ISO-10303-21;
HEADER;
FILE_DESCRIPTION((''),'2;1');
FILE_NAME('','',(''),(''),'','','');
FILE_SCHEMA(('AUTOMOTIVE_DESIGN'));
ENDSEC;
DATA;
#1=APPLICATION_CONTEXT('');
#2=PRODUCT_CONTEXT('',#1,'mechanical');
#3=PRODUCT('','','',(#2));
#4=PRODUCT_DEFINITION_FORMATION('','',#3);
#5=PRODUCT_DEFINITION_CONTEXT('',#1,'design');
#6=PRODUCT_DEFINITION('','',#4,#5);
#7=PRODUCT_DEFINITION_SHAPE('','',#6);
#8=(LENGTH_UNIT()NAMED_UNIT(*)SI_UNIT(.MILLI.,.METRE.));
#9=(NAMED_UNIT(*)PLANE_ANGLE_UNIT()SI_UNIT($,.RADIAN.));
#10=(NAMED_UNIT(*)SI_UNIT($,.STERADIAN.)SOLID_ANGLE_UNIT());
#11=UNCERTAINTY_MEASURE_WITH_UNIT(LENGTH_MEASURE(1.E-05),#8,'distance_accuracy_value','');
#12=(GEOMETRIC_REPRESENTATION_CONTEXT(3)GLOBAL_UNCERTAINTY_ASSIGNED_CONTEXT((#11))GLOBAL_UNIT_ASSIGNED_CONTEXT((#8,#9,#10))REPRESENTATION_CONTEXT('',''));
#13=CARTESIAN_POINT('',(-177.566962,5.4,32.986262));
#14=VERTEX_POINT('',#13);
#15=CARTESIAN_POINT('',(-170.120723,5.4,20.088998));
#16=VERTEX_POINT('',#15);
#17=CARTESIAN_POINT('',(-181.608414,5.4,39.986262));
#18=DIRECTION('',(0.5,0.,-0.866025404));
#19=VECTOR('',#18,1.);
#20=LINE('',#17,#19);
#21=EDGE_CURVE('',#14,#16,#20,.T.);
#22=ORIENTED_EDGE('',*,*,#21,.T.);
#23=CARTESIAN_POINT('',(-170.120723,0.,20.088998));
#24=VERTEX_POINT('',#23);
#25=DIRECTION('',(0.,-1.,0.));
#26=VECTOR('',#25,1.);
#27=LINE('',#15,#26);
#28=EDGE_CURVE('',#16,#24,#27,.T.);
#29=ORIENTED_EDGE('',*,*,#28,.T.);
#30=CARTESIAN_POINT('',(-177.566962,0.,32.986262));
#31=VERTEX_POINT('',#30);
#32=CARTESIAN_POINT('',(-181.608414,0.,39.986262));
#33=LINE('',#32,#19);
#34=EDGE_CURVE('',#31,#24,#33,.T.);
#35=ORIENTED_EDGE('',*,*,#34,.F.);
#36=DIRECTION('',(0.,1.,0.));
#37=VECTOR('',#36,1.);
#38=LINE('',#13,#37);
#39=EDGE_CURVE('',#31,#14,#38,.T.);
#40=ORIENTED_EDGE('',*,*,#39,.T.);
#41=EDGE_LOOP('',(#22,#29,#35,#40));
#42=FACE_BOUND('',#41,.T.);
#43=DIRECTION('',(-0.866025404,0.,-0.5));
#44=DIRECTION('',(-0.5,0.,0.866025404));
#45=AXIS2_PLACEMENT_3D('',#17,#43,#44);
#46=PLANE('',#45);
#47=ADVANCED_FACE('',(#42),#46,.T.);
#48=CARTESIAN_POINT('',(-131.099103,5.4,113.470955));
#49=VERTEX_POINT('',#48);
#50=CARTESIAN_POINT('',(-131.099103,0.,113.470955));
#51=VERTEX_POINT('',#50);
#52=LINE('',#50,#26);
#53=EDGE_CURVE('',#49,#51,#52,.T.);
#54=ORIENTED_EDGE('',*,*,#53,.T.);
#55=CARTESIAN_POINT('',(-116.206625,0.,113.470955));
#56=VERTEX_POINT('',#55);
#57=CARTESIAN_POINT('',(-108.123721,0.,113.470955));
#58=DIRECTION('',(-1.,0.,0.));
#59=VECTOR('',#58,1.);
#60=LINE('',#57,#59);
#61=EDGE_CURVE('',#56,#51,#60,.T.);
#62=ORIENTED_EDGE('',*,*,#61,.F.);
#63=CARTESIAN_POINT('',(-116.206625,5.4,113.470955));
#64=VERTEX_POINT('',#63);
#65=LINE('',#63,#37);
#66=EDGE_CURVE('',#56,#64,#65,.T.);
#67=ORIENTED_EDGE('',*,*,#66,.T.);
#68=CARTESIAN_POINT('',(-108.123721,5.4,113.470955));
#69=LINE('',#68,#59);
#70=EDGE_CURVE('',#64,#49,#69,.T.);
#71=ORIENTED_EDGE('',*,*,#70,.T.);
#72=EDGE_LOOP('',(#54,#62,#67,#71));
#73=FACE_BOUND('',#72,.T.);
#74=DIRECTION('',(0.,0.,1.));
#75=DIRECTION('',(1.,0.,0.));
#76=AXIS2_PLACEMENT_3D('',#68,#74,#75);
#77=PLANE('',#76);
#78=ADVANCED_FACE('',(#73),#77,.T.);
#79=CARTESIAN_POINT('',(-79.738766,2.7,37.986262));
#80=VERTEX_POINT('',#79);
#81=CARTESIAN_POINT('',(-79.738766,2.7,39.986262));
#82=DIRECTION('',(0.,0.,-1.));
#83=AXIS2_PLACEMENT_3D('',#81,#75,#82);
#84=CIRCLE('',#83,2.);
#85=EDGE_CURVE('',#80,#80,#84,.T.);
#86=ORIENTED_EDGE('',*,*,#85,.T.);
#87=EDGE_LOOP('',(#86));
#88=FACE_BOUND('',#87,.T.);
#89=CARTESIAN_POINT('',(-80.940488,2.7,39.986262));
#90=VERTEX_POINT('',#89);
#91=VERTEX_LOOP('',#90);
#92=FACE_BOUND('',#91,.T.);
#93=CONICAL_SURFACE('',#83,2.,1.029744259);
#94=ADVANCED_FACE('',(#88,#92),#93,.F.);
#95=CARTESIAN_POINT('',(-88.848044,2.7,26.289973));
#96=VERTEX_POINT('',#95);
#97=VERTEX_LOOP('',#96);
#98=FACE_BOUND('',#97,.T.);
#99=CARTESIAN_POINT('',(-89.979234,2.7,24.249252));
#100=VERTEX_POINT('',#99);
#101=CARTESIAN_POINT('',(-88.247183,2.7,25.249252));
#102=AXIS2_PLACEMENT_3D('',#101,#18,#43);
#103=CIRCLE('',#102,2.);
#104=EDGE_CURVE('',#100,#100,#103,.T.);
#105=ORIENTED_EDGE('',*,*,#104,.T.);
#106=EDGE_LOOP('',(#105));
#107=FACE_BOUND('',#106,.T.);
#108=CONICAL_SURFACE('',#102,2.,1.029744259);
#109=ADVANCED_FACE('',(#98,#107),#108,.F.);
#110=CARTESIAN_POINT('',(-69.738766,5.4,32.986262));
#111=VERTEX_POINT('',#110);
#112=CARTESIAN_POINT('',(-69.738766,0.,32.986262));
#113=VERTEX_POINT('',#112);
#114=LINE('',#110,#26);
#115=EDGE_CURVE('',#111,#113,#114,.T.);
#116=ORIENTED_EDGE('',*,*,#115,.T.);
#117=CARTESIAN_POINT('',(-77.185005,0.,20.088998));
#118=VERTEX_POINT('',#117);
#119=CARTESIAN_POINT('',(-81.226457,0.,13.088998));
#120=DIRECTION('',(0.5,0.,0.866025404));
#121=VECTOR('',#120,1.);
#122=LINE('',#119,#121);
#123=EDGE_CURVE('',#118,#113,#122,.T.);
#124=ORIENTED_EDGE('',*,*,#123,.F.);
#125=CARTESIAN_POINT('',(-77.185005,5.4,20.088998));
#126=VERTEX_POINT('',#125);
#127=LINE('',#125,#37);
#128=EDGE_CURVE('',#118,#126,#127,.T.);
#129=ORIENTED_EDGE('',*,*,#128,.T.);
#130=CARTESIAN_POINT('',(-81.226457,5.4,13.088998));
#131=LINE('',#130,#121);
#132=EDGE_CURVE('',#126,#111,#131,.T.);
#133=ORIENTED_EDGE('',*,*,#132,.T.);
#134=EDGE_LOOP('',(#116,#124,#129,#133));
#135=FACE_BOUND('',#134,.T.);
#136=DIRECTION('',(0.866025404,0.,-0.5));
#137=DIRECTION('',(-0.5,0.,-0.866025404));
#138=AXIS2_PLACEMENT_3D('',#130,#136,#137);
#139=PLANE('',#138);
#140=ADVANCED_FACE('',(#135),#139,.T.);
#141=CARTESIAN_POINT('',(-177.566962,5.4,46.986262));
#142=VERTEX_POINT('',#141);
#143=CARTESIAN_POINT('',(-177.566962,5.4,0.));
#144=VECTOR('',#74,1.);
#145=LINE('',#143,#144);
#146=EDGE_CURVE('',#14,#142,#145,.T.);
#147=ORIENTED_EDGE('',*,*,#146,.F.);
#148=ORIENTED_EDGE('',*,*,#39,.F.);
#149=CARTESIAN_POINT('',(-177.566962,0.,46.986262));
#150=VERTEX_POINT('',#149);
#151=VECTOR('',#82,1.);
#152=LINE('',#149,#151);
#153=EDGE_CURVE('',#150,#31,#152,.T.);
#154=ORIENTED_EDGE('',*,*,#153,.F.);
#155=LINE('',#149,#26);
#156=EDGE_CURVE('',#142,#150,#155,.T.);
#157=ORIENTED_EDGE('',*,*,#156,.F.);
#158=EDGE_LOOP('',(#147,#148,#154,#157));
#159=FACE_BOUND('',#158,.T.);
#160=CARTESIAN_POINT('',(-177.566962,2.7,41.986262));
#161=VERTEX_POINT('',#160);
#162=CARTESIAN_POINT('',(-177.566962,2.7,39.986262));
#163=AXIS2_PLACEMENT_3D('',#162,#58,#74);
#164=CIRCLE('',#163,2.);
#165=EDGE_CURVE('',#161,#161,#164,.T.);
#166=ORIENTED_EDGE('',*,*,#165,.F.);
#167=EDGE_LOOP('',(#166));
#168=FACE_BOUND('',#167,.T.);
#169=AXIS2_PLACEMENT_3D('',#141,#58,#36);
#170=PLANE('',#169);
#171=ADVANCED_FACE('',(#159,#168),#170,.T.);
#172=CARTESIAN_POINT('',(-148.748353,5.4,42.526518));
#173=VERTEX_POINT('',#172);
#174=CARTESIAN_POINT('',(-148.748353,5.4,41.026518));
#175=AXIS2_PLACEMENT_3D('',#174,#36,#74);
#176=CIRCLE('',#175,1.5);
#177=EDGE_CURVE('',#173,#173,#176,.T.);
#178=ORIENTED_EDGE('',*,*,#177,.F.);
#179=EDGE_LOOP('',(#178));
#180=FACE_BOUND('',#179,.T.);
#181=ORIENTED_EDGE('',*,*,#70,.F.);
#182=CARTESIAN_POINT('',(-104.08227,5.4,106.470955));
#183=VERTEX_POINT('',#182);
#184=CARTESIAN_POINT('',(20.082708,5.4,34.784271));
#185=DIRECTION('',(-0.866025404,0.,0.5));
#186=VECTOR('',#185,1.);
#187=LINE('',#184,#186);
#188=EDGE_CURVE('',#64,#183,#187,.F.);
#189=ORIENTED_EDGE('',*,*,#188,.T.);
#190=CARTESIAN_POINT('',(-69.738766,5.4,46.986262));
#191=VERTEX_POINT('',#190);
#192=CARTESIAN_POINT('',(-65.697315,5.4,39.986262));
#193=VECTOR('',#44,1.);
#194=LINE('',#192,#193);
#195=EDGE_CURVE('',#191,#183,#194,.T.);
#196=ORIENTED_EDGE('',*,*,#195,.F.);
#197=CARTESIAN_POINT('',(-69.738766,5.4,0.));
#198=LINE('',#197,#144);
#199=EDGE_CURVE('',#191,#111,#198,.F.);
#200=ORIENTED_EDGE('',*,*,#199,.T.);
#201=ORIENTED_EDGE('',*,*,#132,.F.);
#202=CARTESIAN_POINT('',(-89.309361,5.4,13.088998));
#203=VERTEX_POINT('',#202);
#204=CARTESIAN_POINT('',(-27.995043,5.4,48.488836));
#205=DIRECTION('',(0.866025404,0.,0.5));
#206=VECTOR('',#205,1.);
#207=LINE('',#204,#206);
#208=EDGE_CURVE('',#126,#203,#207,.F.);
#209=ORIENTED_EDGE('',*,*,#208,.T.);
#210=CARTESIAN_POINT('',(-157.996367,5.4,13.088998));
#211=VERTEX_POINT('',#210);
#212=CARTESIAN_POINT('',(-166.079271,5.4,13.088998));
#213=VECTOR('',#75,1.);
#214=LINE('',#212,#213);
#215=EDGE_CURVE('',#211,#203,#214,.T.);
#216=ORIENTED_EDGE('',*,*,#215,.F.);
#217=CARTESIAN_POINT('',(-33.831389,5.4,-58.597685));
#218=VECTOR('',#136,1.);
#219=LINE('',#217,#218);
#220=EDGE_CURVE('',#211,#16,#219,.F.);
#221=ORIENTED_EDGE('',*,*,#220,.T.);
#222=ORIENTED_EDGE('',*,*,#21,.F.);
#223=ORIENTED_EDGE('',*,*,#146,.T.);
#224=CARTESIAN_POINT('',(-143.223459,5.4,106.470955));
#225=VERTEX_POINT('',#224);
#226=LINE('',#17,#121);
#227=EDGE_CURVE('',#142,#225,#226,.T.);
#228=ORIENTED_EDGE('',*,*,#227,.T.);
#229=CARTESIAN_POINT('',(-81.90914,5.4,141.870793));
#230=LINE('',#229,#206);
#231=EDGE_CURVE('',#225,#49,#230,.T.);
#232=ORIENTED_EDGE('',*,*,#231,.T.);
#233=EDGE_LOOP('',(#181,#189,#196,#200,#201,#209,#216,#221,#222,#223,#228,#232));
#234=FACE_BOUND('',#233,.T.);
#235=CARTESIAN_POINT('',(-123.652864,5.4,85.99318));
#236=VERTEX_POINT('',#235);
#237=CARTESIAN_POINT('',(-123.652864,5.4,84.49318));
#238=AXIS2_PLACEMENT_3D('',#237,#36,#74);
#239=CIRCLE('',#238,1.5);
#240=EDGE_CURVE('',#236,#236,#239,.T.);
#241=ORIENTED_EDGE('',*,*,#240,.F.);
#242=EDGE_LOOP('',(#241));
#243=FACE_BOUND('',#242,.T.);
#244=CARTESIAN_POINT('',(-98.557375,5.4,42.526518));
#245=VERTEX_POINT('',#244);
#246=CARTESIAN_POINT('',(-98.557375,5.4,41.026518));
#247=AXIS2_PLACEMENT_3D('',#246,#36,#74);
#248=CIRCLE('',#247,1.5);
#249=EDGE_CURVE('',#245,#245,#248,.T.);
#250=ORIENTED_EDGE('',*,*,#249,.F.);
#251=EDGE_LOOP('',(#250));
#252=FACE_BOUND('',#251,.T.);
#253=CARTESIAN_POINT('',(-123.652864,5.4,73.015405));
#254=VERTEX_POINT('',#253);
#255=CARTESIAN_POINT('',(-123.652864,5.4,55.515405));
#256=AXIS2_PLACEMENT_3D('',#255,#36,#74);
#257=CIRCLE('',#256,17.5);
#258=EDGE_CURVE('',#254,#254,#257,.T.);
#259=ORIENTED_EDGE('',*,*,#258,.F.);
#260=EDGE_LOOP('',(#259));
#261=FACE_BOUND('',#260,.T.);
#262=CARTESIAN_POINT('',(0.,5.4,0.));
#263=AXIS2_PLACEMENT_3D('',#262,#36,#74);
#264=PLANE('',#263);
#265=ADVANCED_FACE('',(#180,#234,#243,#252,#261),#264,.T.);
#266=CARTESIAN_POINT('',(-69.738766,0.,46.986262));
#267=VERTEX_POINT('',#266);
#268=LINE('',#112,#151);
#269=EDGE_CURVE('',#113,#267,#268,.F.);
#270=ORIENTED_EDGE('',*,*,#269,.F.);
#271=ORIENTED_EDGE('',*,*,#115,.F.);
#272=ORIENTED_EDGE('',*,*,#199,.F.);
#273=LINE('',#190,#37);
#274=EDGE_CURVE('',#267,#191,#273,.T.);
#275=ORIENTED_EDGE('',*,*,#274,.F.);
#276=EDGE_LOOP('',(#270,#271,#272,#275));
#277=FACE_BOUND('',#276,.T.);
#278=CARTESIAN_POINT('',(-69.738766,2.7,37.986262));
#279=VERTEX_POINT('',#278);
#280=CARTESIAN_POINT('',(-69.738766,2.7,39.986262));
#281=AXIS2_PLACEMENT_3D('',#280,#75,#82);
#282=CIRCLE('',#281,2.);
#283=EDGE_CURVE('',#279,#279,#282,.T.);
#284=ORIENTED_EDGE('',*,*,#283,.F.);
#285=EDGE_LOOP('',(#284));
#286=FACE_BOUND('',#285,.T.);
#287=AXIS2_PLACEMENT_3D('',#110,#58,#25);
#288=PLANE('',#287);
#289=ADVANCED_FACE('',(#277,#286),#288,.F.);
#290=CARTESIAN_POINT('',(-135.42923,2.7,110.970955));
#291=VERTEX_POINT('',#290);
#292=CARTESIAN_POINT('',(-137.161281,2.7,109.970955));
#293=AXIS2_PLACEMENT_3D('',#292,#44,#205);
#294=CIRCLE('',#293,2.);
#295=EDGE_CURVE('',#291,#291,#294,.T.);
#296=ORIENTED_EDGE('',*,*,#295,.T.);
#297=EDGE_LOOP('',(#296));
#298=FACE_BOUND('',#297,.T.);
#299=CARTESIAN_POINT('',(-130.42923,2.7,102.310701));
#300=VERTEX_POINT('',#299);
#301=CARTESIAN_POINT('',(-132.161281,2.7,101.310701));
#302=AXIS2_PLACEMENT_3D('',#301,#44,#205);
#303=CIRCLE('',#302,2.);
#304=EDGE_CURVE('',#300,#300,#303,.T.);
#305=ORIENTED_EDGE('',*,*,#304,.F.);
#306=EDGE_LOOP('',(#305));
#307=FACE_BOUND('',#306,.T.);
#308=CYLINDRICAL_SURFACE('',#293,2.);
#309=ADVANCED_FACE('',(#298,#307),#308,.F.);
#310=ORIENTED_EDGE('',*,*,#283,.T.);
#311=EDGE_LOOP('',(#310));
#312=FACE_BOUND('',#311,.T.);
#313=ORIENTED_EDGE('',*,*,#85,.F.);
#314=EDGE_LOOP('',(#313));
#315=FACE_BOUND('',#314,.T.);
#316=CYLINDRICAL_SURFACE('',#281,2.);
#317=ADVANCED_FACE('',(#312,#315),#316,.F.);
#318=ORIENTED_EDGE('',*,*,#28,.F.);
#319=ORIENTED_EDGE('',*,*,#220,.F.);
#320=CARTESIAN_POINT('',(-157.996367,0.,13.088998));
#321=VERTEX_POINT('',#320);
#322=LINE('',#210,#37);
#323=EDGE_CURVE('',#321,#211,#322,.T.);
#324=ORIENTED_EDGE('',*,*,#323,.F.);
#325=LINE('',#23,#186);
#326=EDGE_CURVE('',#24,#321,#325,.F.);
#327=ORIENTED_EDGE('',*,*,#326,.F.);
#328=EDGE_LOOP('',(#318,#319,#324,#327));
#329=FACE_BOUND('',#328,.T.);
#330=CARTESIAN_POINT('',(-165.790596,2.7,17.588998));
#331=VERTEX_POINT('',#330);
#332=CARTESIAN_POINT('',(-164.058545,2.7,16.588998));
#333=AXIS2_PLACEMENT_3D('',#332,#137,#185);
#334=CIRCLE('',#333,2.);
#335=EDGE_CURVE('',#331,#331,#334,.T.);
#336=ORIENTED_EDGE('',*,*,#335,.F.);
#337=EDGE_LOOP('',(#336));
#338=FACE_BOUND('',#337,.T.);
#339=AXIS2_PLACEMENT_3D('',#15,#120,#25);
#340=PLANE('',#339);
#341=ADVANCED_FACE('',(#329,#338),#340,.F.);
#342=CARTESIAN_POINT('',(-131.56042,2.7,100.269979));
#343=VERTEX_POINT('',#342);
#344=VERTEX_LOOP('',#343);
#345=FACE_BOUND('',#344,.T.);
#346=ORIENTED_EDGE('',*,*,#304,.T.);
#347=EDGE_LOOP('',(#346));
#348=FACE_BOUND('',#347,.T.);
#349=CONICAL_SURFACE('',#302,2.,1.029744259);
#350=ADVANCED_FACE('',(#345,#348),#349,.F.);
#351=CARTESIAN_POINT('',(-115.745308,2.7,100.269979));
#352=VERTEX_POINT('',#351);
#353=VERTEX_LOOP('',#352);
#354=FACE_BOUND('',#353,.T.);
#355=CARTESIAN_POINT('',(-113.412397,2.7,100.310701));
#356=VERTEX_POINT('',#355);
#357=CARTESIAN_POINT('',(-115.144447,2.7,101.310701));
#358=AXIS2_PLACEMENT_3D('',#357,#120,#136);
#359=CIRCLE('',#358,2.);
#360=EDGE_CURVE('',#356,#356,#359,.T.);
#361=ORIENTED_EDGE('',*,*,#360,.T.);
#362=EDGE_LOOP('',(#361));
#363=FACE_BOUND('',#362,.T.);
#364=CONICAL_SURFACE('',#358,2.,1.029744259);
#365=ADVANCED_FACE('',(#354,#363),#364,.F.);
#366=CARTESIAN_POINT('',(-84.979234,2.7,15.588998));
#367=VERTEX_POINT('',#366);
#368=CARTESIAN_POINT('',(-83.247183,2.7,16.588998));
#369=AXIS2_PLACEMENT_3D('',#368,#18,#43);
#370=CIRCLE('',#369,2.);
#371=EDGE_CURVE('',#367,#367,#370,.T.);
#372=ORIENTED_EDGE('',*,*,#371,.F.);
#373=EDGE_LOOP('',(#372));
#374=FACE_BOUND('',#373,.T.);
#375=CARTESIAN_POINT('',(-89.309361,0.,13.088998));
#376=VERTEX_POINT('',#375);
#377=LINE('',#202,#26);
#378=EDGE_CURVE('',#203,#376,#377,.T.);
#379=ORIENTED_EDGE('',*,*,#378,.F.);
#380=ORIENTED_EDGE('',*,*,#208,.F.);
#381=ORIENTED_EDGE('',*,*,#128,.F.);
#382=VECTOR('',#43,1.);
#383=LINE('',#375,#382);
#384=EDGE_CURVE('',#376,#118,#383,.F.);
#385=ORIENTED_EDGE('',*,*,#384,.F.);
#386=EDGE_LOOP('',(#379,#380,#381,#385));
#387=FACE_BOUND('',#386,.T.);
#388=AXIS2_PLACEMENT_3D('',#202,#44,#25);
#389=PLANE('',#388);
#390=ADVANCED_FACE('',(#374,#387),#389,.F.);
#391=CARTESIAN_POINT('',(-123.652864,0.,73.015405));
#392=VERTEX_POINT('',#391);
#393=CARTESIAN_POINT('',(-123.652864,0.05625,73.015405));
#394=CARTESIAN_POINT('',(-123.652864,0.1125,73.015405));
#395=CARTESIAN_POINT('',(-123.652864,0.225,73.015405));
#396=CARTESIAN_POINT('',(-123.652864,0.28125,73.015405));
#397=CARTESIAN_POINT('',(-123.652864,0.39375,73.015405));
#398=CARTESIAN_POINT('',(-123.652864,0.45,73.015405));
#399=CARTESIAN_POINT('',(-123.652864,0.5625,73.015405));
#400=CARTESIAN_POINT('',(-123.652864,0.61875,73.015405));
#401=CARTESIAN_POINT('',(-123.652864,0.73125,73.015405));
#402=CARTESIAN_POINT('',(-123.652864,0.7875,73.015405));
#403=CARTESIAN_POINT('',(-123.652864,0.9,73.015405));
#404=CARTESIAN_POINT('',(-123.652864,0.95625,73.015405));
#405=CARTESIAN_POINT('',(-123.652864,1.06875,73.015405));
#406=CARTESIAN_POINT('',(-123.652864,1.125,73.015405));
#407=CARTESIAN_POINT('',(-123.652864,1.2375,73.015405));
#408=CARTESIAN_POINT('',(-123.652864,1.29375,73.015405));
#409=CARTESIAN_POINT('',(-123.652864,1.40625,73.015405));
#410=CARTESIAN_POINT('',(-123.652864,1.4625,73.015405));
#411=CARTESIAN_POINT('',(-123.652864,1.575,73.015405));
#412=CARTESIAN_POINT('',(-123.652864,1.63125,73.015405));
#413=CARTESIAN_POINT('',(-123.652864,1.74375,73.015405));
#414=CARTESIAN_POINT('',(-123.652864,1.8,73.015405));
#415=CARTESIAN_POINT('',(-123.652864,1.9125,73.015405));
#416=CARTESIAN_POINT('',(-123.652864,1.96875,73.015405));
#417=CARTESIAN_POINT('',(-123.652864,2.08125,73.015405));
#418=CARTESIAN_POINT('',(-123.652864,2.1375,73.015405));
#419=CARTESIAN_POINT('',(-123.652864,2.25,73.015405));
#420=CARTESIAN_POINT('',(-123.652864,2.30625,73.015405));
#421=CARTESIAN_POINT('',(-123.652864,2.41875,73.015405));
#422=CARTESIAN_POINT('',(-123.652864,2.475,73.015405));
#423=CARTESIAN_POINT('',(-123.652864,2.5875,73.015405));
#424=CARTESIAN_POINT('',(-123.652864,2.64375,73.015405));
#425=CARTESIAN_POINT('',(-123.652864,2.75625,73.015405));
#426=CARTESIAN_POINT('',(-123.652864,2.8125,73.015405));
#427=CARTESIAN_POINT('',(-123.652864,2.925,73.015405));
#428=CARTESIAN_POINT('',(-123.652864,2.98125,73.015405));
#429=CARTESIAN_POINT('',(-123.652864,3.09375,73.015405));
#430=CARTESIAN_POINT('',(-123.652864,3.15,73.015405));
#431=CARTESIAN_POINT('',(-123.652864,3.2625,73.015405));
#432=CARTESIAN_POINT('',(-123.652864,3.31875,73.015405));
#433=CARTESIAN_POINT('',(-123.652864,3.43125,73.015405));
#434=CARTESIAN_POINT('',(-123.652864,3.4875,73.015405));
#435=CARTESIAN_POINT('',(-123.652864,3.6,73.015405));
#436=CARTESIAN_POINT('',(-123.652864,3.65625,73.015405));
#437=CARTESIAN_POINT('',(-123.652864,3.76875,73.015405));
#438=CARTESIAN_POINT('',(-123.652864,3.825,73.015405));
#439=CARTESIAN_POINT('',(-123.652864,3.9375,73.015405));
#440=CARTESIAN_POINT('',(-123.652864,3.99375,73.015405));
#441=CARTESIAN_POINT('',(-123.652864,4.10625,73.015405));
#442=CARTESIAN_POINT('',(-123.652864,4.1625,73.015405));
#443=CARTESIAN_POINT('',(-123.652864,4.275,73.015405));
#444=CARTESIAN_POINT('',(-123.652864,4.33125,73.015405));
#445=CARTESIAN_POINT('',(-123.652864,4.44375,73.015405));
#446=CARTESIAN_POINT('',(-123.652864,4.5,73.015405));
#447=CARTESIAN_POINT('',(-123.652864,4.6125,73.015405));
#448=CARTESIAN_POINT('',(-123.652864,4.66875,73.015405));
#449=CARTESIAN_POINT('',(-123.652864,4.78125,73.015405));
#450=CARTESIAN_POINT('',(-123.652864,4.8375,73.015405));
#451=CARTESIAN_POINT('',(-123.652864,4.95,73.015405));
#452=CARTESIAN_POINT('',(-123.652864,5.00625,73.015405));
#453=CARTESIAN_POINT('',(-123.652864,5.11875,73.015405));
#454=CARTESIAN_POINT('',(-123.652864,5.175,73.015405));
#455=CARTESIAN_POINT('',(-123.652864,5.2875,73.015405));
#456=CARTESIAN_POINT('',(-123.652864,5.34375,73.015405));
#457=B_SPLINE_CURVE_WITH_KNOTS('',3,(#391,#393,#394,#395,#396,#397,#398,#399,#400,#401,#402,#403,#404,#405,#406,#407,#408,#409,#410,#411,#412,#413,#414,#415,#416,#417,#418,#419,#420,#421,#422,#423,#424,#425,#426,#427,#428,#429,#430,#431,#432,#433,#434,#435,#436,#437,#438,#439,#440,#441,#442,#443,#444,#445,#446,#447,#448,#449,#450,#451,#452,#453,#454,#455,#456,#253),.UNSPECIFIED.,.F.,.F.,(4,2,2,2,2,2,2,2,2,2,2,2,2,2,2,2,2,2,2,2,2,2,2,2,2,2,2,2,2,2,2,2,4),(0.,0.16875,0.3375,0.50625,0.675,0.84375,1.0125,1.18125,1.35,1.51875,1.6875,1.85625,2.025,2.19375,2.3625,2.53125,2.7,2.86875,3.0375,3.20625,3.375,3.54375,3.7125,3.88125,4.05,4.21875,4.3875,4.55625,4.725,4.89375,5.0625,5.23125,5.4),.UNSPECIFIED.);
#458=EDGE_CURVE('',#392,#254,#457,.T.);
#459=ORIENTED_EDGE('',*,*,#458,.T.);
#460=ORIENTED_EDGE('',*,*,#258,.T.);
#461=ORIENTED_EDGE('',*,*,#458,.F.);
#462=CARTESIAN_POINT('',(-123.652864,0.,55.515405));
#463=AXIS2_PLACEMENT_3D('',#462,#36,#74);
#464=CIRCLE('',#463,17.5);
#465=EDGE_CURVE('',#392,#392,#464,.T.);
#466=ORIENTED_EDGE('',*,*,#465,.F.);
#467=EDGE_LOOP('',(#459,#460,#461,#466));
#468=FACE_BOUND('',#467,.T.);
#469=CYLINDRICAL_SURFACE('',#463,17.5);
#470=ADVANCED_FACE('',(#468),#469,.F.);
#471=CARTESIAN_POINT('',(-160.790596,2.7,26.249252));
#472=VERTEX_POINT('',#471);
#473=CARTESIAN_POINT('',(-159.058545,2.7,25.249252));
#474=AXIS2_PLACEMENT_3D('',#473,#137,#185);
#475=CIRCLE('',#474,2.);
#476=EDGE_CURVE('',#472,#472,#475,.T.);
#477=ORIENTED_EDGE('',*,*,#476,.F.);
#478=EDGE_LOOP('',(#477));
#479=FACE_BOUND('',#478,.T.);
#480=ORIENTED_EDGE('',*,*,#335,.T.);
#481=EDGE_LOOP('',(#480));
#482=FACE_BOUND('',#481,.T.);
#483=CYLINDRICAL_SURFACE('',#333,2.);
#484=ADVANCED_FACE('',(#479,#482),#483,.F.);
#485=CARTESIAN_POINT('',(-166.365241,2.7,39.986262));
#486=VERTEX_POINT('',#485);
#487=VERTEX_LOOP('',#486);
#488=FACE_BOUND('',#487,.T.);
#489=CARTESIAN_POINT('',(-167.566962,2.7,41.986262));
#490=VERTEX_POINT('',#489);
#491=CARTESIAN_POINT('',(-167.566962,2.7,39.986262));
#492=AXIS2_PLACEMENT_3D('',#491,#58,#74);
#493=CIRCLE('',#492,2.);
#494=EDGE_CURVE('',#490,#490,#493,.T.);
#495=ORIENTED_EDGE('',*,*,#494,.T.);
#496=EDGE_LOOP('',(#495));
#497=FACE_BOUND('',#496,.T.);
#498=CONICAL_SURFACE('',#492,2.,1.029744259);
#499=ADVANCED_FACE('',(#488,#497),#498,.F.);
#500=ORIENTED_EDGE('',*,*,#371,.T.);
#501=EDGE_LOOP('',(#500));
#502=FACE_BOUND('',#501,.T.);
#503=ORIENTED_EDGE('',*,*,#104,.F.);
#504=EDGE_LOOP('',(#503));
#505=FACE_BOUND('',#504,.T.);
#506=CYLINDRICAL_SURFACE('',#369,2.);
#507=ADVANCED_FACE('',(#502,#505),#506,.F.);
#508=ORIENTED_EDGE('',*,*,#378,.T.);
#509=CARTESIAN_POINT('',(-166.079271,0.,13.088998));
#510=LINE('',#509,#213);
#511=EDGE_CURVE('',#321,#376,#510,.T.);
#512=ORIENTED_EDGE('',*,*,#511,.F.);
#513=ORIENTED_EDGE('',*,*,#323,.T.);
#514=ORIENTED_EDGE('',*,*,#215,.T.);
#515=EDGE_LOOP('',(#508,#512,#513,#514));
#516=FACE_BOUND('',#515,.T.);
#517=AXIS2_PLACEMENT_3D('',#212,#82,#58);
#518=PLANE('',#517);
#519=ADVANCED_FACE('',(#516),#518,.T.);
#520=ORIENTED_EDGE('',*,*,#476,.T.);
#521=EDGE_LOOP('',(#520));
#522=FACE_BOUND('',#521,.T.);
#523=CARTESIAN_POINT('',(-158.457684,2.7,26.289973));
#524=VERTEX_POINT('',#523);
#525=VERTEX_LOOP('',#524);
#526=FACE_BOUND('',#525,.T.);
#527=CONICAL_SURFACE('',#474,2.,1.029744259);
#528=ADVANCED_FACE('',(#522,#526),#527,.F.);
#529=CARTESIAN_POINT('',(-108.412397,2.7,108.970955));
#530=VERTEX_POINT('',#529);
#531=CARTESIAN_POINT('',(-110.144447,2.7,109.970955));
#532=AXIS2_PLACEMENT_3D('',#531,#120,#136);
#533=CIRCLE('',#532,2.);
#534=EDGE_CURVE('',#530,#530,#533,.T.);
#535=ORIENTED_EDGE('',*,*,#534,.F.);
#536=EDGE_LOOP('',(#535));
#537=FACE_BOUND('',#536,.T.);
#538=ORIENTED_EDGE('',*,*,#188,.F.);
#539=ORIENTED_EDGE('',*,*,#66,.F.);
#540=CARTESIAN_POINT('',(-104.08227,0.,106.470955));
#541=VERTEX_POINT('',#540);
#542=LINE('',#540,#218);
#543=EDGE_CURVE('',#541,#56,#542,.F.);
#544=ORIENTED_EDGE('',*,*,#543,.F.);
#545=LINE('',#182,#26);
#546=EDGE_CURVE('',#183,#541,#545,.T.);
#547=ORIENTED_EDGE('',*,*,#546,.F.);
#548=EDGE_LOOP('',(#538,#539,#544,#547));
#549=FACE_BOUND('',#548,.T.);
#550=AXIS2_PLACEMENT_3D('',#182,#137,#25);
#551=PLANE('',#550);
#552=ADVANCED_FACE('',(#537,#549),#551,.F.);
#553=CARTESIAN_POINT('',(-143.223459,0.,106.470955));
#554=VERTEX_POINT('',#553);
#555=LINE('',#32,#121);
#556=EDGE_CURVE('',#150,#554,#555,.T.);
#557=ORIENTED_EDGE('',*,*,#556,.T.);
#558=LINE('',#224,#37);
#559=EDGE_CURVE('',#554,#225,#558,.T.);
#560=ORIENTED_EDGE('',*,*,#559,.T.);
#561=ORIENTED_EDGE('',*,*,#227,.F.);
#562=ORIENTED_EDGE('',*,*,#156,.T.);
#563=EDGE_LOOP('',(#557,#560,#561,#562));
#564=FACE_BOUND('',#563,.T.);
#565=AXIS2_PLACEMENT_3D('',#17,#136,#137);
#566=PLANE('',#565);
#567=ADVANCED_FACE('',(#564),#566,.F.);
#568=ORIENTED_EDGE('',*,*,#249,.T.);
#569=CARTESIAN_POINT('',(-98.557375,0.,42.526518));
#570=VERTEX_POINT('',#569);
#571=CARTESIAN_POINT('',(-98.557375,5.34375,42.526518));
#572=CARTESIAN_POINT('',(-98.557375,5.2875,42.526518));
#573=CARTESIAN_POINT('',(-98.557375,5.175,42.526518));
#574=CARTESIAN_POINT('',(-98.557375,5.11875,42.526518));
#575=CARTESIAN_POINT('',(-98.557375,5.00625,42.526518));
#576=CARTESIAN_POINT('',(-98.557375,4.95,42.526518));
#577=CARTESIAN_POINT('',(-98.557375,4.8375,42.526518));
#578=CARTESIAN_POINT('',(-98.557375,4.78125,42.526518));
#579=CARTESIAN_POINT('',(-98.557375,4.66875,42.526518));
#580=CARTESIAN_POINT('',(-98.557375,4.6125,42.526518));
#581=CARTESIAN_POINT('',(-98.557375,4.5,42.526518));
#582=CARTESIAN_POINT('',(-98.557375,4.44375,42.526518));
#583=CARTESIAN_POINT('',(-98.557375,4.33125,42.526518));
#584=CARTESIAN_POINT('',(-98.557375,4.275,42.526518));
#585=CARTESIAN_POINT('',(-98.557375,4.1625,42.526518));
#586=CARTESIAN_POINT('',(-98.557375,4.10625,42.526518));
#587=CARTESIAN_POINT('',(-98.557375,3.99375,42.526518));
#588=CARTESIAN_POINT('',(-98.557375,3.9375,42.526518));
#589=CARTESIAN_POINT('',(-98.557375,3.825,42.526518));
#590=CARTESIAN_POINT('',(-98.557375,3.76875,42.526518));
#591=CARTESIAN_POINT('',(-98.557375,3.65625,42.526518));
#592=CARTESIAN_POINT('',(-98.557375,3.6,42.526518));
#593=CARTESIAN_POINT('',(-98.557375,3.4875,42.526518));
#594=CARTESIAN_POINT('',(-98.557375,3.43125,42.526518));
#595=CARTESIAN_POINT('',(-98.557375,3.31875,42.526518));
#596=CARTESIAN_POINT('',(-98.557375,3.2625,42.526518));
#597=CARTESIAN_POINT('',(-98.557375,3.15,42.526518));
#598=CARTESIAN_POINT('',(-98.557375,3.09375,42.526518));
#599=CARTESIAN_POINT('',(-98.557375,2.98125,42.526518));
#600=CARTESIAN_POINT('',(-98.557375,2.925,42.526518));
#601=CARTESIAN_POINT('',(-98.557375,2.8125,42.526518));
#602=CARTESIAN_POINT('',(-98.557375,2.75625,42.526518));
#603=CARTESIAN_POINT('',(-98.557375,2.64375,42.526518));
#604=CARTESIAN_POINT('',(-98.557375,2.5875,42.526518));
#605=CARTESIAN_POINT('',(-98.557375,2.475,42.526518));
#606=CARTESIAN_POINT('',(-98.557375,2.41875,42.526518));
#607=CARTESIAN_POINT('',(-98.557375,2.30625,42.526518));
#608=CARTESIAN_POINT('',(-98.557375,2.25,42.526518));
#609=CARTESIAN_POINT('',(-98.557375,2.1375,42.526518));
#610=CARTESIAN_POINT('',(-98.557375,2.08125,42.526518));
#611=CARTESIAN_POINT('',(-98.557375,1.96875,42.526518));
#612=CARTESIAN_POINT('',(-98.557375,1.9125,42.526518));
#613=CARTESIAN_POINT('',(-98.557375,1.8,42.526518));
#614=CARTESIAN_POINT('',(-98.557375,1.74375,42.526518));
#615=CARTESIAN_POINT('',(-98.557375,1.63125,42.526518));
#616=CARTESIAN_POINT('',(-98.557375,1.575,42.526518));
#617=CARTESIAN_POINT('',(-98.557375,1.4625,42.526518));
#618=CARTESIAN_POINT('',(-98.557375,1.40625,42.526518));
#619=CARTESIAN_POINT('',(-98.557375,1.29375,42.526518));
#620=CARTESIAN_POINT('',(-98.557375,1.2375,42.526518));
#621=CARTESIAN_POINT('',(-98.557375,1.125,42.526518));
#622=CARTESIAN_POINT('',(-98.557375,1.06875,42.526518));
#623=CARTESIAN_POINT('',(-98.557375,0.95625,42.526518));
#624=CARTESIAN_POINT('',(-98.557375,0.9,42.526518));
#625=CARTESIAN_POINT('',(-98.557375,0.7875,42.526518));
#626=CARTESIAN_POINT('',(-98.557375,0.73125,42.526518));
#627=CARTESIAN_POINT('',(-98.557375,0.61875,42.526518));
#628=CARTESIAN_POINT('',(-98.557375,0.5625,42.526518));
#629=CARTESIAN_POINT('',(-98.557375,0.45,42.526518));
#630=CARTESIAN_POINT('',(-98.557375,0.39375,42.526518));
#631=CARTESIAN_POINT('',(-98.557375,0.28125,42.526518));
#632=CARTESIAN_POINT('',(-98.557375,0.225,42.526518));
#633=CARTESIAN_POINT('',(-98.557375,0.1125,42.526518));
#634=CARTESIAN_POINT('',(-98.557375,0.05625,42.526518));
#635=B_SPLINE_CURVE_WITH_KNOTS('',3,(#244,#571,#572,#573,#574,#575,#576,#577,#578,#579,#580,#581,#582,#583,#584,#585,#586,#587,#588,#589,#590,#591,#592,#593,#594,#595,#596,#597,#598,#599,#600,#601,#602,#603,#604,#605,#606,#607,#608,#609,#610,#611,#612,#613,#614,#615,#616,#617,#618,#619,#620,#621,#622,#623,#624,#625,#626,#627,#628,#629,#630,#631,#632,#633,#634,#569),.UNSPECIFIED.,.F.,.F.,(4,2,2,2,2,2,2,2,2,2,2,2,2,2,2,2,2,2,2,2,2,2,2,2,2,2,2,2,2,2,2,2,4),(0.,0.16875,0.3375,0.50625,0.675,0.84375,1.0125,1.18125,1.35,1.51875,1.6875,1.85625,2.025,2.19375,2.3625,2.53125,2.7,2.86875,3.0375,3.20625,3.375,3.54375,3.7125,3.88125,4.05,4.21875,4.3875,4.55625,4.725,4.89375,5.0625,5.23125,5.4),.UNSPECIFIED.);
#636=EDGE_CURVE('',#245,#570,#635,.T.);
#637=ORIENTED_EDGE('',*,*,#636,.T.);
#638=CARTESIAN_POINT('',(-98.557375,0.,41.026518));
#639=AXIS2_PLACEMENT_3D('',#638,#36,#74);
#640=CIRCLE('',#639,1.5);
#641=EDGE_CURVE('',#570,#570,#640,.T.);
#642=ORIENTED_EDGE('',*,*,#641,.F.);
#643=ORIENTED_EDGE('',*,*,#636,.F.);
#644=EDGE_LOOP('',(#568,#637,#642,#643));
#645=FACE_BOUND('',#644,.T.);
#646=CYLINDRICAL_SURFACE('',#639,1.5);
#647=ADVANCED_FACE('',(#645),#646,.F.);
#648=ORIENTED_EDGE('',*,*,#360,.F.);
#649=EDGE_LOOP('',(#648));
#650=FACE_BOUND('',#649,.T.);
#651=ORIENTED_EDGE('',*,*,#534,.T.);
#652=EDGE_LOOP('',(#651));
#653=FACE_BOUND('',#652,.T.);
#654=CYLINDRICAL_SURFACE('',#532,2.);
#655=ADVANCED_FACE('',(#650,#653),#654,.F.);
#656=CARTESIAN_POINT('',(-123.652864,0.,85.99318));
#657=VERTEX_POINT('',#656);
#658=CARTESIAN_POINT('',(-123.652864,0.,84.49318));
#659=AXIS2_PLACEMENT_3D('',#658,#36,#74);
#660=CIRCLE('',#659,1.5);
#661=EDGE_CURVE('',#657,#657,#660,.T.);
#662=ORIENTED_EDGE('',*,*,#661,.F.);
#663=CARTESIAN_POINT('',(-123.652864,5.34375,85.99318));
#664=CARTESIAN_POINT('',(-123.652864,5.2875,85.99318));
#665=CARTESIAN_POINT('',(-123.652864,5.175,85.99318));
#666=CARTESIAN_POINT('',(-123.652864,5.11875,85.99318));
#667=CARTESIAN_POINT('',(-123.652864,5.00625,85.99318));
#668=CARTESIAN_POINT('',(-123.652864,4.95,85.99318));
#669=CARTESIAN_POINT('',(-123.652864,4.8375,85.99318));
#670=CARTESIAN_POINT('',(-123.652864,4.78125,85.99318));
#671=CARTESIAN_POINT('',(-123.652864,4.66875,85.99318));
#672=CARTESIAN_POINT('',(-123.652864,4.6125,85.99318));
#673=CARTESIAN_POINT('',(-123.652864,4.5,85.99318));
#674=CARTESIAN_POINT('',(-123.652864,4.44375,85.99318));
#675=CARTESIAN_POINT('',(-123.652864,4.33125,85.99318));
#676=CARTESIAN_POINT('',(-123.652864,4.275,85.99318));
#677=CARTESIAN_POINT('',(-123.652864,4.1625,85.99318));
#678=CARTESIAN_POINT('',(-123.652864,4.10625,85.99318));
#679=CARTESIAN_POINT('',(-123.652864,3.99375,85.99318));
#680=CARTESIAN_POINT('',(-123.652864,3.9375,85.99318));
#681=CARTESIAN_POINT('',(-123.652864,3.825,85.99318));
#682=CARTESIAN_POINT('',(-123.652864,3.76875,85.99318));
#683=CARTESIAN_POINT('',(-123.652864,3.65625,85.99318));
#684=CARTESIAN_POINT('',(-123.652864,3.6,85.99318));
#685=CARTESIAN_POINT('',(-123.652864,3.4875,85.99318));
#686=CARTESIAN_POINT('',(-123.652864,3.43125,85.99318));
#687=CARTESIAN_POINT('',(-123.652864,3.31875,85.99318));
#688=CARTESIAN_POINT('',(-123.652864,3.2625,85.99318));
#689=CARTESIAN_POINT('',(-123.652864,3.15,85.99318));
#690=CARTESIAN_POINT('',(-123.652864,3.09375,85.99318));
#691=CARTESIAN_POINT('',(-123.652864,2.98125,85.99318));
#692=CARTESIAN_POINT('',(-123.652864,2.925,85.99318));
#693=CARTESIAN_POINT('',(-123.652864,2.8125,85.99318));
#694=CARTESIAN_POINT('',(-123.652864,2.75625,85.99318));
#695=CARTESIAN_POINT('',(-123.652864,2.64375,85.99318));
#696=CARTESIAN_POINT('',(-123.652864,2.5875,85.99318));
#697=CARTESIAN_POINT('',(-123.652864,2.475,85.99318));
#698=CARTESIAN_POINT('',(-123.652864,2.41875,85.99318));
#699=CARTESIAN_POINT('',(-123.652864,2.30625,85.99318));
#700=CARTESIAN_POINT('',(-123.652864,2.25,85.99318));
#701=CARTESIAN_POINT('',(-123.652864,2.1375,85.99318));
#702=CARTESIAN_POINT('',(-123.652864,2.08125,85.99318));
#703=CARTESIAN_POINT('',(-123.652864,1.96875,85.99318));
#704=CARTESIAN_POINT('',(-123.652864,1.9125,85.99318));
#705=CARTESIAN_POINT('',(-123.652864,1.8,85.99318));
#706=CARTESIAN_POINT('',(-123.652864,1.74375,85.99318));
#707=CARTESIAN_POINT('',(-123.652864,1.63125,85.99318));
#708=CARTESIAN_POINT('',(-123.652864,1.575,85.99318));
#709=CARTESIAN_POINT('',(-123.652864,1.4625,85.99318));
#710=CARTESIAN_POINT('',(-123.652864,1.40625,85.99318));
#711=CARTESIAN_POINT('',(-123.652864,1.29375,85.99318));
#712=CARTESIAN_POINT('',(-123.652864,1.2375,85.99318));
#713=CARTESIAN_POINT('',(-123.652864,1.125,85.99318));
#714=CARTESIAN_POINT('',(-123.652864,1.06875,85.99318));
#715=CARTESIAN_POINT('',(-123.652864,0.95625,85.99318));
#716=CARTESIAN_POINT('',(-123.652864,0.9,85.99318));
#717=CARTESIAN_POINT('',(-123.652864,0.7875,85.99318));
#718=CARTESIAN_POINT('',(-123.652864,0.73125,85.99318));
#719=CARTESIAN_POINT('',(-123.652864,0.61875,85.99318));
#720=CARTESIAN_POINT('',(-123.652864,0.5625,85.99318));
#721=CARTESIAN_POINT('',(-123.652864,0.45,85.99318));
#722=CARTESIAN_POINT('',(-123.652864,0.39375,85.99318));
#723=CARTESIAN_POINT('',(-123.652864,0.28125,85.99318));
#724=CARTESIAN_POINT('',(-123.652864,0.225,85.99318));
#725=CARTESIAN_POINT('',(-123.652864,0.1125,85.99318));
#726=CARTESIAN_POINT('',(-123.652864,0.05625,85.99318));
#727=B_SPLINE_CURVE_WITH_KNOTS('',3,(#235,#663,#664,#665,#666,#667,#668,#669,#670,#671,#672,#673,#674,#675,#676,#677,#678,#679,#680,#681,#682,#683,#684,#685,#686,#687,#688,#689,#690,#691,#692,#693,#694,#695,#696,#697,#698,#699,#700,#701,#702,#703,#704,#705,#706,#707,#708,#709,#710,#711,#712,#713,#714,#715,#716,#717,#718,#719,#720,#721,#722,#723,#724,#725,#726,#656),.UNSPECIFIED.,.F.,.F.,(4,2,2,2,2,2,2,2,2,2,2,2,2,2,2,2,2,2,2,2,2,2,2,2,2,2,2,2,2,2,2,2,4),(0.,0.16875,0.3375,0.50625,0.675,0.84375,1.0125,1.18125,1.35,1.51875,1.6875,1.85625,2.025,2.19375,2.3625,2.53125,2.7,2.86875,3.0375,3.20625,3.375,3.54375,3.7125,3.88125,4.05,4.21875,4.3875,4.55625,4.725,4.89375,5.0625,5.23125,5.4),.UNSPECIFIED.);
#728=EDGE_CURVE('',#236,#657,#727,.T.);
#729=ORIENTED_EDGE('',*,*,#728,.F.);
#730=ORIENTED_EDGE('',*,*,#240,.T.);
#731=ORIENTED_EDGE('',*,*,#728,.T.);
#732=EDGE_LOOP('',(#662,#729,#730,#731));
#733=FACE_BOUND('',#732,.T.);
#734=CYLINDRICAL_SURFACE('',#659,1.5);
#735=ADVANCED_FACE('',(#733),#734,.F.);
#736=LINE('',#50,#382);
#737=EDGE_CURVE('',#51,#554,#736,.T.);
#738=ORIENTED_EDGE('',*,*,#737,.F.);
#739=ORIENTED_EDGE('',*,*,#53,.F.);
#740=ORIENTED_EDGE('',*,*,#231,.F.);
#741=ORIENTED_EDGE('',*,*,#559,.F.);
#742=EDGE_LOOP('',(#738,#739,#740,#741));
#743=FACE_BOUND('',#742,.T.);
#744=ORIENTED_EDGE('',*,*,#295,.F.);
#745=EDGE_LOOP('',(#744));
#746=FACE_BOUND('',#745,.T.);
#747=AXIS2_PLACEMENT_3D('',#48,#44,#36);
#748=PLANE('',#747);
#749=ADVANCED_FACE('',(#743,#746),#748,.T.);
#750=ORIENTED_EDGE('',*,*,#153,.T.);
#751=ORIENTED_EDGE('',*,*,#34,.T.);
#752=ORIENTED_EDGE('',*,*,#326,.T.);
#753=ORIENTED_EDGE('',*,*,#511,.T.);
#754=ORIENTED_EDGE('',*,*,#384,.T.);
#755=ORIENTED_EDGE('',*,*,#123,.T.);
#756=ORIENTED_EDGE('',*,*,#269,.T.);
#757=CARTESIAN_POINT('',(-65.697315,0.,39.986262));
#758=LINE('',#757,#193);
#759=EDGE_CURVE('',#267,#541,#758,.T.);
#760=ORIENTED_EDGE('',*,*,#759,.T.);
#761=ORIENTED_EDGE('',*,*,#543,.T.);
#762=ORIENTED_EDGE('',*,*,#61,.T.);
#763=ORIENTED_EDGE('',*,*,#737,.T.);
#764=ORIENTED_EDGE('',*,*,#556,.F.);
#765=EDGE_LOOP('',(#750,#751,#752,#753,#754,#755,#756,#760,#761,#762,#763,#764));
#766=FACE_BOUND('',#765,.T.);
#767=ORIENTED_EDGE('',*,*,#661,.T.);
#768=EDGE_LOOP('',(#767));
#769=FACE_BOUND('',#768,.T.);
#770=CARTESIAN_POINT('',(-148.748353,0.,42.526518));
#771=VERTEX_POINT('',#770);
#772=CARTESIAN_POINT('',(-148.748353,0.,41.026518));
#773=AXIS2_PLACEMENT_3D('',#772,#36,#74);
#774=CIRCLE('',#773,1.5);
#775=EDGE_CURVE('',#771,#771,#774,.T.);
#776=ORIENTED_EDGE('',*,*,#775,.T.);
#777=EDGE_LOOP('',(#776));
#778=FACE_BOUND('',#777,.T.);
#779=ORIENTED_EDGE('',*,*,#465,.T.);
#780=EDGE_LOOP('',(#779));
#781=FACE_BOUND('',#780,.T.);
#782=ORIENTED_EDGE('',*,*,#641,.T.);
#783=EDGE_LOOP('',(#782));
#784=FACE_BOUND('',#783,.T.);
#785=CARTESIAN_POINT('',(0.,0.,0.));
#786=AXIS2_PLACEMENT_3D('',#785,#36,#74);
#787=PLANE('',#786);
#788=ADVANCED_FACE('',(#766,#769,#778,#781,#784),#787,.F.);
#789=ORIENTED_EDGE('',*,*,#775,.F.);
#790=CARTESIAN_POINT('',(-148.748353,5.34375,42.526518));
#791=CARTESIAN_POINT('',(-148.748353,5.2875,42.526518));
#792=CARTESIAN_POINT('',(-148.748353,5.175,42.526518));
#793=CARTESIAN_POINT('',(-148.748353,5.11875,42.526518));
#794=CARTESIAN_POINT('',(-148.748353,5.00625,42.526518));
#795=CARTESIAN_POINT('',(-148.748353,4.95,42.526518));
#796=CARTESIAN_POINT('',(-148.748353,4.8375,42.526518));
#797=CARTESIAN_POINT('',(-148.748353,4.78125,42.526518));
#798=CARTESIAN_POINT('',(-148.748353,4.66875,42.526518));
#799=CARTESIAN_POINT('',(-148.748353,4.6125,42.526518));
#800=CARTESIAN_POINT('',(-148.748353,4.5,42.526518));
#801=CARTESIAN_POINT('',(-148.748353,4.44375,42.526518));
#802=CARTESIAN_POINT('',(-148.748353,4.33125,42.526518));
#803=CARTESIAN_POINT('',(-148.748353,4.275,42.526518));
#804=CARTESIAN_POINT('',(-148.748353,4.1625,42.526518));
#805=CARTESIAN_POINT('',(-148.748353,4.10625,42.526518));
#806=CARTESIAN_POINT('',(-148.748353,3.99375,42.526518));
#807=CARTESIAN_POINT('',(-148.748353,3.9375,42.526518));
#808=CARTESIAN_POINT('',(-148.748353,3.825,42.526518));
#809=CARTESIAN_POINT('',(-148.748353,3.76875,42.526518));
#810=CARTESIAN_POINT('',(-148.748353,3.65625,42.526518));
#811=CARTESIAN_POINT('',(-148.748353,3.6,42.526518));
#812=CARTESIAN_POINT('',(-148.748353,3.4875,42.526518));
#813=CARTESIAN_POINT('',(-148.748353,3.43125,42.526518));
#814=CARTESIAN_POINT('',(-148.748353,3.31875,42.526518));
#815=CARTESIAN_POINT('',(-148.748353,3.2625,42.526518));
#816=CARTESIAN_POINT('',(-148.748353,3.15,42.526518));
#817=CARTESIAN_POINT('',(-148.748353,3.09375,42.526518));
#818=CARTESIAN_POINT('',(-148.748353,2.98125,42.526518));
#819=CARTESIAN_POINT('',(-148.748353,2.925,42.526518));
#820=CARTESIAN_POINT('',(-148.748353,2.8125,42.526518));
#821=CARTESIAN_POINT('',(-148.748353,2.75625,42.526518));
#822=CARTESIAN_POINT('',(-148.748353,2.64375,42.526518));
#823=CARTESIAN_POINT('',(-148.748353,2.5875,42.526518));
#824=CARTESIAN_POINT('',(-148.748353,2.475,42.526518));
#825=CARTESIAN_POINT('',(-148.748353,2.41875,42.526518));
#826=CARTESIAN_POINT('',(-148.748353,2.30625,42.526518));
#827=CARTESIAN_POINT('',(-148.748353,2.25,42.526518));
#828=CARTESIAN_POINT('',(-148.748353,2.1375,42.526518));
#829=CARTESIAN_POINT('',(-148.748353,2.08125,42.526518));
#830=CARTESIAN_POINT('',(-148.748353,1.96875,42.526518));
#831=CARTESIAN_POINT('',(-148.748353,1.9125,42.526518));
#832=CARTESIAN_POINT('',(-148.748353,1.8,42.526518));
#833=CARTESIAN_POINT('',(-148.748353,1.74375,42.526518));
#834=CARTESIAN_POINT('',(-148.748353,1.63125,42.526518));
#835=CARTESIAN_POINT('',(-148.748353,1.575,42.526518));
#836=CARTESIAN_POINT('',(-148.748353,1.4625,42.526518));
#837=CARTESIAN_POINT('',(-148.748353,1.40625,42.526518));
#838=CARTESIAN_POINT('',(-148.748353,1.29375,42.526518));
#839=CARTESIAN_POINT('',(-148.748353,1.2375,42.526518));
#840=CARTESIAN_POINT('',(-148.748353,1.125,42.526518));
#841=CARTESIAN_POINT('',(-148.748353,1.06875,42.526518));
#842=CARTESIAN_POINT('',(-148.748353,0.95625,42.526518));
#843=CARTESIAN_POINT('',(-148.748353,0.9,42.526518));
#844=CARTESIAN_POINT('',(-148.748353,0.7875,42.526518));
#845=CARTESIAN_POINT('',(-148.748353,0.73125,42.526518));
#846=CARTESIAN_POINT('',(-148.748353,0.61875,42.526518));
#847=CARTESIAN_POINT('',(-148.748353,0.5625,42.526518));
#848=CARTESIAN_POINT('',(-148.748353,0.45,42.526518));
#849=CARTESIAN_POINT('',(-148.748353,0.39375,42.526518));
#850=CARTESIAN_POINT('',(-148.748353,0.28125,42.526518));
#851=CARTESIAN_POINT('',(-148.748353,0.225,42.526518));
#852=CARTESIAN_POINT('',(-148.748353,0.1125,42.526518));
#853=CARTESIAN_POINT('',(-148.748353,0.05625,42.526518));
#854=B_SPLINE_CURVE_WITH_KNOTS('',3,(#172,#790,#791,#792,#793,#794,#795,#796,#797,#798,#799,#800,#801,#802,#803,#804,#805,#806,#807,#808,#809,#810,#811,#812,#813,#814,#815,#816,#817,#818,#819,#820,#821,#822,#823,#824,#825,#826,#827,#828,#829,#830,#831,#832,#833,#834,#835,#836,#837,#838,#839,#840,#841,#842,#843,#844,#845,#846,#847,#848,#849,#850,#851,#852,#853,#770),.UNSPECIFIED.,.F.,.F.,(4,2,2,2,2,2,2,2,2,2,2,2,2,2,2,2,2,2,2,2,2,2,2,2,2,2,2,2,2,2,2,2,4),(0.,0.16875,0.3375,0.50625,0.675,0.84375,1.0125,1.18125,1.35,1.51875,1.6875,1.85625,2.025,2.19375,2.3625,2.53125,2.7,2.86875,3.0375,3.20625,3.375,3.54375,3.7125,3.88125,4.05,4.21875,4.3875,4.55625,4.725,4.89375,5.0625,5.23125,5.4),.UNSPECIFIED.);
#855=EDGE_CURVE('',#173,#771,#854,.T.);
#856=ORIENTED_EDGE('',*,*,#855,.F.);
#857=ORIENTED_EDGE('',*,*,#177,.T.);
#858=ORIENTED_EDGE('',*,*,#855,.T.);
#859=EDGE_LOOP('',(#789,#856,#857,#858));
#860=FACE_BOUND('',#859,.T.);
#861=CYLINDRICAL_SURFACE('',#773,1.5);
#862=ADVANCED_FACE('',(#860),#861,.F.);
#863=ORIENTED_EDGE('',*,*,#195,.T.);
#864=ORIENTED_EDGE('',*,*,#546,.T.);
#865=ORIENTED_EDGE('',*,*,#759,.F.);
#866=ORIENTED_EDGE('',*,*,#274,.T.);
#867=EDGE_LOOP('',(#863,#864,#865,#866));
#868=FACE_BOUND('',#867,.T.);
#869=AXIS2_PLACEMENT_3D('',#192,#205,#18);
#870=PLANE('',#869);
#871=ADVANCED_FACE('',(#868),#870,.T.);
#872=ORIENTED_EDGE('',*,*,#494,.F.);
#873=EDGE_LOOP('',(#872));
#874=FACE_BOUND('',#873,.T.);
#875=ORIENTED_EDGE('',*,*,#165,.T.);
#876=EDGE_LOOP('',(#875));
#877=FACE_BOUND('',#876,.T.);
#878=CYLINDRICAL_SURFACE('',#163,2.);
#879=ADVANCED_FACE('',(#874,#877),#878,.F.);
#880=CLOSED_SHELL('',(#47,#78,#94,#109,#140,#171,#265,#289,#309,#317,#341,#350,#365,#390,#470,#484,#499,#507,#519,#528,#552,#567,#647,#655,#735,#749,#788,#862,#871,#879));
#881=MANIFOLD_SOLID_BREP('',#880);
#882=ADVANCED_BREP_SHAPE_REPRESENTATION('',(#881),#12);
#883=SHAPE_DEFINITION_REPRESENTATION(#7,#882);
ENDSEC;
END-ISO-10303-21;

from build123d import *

# Parameters (mm, degrees)
BOSS_EXTRUDE2_DEPTH       = 5.4
F_3_0MM_DOWEL_HOLE1_D     = 4
F_3_0MM_DOWEL_HOLE1_DEPTH = 10
F_3_0MM_DOWEL_HOLE1_TIP   = 1.201721238
F_3_0MM_DOWEL_HOLE2_D     = 4
F_3_0MM_DOWEL_HOLE2_DEPTH = 10
F_3_0MM_DOWEL_HOLE2_TIP   = 1.201721238
F_3_0MM_DOWEL_HOLE3_D     = 4
F_3_0MM_DOWEL_HOLE3_DEPTH = 10
F_3_0MM_DOWEL_HOLE3_TIP   = 1.201721238
F_3_0MM_DOWEL_HOLE4_D     = 4
F_3_0MM_DOWEL_HOLE4_DEPTH = 10
F_3_0MM_DOWEL_HOLE4_TIP   = 1.201721238
F_3_0MM_DOWEL_HOLE5_D     = 4
F_3_0MM_DOWEL_HOLE5_DEPTH = 10
F_3_0MM_DOWEL_HOLE5_TIP   = 1.201721238
F_3_0MM_DOWEL_HOLE6_D     = 4
F_3_0MM_DOWEL_HOLE6_DEPTH = 10
F_3_0MM_DOWEL_HOLE6_TIP   = 1.201721238
SKETCH23_R                = 17.5
CUT_EXTRUDE1_DEPTH        = 211.795738776
CUT_EXTRUDE2_DEPTH        = 211.795738776
CUT_EXTRUDE2_DEPTH_BACK   = 211.795738776
SKETCH24_R                = 1.5


with BuildPart() as part:
    # Sketch1 → Boss-Extrude2 (new body)
    with BuildSketch(Plane(origin=(0, 0, 0), x_dir=(1, 0, 0), z_dir=(0, 1, 0))):
        Polygon((-181.608413742, -39.986262339), (-139.182006871, -113.470954622), (-108.123721459, -113.470954622), (-65.697314588, -39.986262339), (-81.226457294, -13.088998174), (-166.079271036, -13.088998174), align=None)
    extrude(amount=BOSS_EXTRUDE2_DEPTH)

    # Chamfer3
    # the kernel refuses this chamfer: 14 mm, written as the material it takes off along each edge
    with BuildSketch(Plane(origin=(-139.182006871, -21.431130006, 113.470954622), x_dir=(-0.5280200004833012, 0, -0.8492319348032166), z_dir=(0, 1, 0))) as chamfer3_piece_1:
        with BuildLine():
            Line((8.572452002, 0), (-4.761795885, -7.128270007))
            Line((-4.761795885, -7.128270007), (-4.999580826, -6.980424406))
            ThreePointArc((-4.999580826, -6.980424406), (-2.499790413, -3.490212203), (-0.237784942, 0.1478456))
            Line((-0.237784942, 0.1478456), (0.009145575, 0.2798506))
            ThreePointArc((0.009145575, 0.2798506), (4.290798789, 0.1399253), (8.581597577, 0.2798506))
            Line((8.581597577, 0.2798506), (8.572452002, 0))
        make_face()
    extrude(amount=48.262260012, mode=Mode.SUBTRACT)

    # Chamfer4
    # the kernel refuses this chamfer: 14 mm, written as the material it takes off along each edge
    with BuildSketch(Plane(origin=(-108.123721459, -21.431130006, 113.470954622), x_dir=(0.5280200004833001, 0, -0.8492319348032171), z_dir=(0, 1, 0))) as chamfer4_piece_1:
        with BuildLine():
            Line((8.572452002, 0), (-4.761795885, 7.128270007))
            Line((-4.761795885, 7.128270007), (-4.999580826, 6.980424406))
            ThreePointArc((-4.999580826, 6.980424406), (-2.499790413, 3.490212203), (-0.237784942, -0.1478456))
            Line((-0.237784942, -0.1478456), (0.009145575, -0.2798506))
            ThreePointArc((0.009145575, -0.2798506), (4.290798789, -0.1399253), (8.581597577, -0.2798506))
            Line((8.581597577, -0.2798506), (8.572452002, 0))
        make_face()
    extrude(amount=48.262260012, mode=Mode.SUBTRACT)

    # Chamfer5
    # the kernel refuses this chamfer: 14 mm, written as the material it takes off along each edge
    with BuildSketch(Plane(origin=(-65.697314588, -21.431130006, 39.986262339), x_dir=(-0.47144642900294653, 0, -0.8818947015264179), z_dir=(0, 1, 0))) as chamfer5_piece_1:
        with BuildLine():
            Line((8.572452002, 0), (-4.761795885, 7.128270007))
            Line((-4.761795885, 7.128270007), (-4.999580826, 6.980424406))
            ThreePointArc((-4.999580826, 6.980424406), (-2.499790413, 3.490212203), (-0.237784942, -0.1478456))
            Line((-0.237784942, -0.1478456), (0.009145575, -0.2798506))
            ThreePointArc((0.009145575, -0.2798506), (4.290798789, -0.1399253), (8.581597577, -0.2798506))
            Line((8.581597577, -0.2798506), (8.572452002, 0))
        make_face()
    extrude(amount=48.262260012, mode=Mode.SUBTRACT)

    # Chamfer6
    # the kernel refuses this chamfer: 14 mm, written as the material it takes off along each edge
    with BuildSketch(Plane(origin=(-81.226457294, -21.431130006, 13.088998174), x_dir=(0.5280200004833007, 0, 0.8492319348032168), z_dir=(0, 1, 0))) as chamfer6_piece_1:
        with BuildLine():
            Line((8.572452002, 0), (-4.761795885, -7.128270007))
            Line((-4.761795885, -7.128270007), (-4.999580826, -6.980424406))
            ThreePointArc((-4.999580826, -6.980424406), (-2.499790413, -3.490212203), (-0.237784942, 0.1478456))
            Line((-0.237784942, 0.1478456), (0.009145575, 0.2798506))
            ThreePointArc((0.009145575, 0.2798506), (4.290798789, 0.1399253), (8.581597577, 0.2798506))
            Line((8.581597577, 0.2798506), (8.572452002, 0))
        make_face()
    extrude(amount=48.262260012, mode=Mode.SUBTRACT)

    # Chamfer7
    # the kernel refuses this chamfer: 14 mm, written as the material it takes off along each edge
    with BuildSketch(Plane(origin=(-166.079271036, -21.431130006, 13.088998174), x_dir=(-0.5280200004833, 0, 0.8492319348032173), z_dir=(0, 1, 0))) as chamfer7_piece_1:
        with BuildLine():
            Line((8.572452002, 0), (-4.761795885, 7.128270007))
            Line((-4.761795885, 7.128270007), (-4.999580826, 6.980424406))
            ThreePointArc((-4.999580826, 6.980424406), (-2.499790413, 3.490212203), (-0.237784942, -0.1478456))
            Line((-0.237784942, -0.1478456), (0.009145575, -0.2798506))
            ThreePointArc((0.009145575, -0.2798506), (4.290798789, -0.1399253), (8.581597577, -0.2798506))
            Line((8.581597577, -0.2798506), (8.572452002, 0))
        make_face()
    extrude(amount=48.262260012, mode=Mode.SUBTRACT)

    # Chamfer8
    # the kernel refuses this chamfer: 14 mm, written as the material it takes off along each edge
    with BuildSketch(Plane(origin=(-181.608413742, -21.431130006, 39.986262339), x_dir=(0.4714464290029468, 0, 0.8818947015264177), z_dir=(0, 1, 0))) as chamfer8_piece_1:
        with BuildLine():
            Line((8.572452002, 0), (-4.761795885, 7.128270007))
            Line((-4.761795885, 7.128270007), (-4.999580826, 6.980424406))
            ThreePointArc((-4.999580826, 6.980424406), (-2.499790413, 3.490212203), (-0.237784942, -0.1478456))
            Line((-0.237784942, -0.1478456), (0.009145575, -0.2798506))
            ThreePointArc((0.009145575, -0.2798506), (4.290798789, -0.1399253), (8.581597577, -0.2798506))
            Line((8.581597577, -0.2798506), (8.572452002, 0))
        make_face()
    extrude(amount=48.262260012, mode=Mode.SUBTRACT)

    # Ø3.0mm Dowel Hole1
    with Locations(Plane(origin=(-81.909140423, 0, 141.870792817), x_dir=(0.8660254037844395, 0, 0.49999999999999856), z_dir=(-0.49999999999999856, 0, 0.8660254037844395))):
        with Locations((-63.799676389, 2.7)):
            Hole(F_3_0MM_DOWEL_HOLE1_D / 2, depth=F_3_0MM_DOWEL_HOLE1_DEPTH)
            with Locations((0, 0, -(F_3_0MM_DOWEL_HOLE1_DEPTH + F_3_0MM_DOWEL_HOLE1_TIP / 2))):  # 118° drill point
                Cone(0, F_3_0MM_DOWEL_HOLE1_D / 2, F_3_0MM_DOWEL_HOLE1_TIP, mode=Mode.SUBTRACT)

    # Ø3.0mm Dowel Hole2
    with Locations(Plane(origin=(20.08270834, 0, 34.784271199), x_dir=(0.8660254037844377, 0, -0.5000000000000018), z_dir=(0.5000000000000018, 0, 0.8660254037844377))):
        with Locations((-150.373366846, 2.7)):
            Hole(F_3_0MM_DOWEL_HOLE2_D / 2, depth=F_3_0MM_DOWEL_HOLE2_DEPTH)
            with Locations((0, 0, -(F_3_0MM_DOWEL_HOLE2_DEPTH + F_3_0MM_DOWEL_HOLE2_TIP / 2))):  # 118° drill point
                Cone(0, F_3_0MM_DOWEL_HOLE2_D / 2, F_3_0MM_DOWEL_HOLE2_TIP, mode=Mode.SUBTRACT)

    # Ø3.0mm Dowel Hole3
    with Locations(Plane(origin=(-69.738766472, 0, 0), x_dir=(0, 0, -1), z_dir=(1, 0, 0))):
        with Locations((-39.986262339, 2.7)):
            Hole(F_3_0MM_DOWEL_HOLE3_D / 2, depth=F_3_0MM_DOWEL_HOLE3_DEPTH)
            with Locations((0, 0, -(F_3_0MM_DOWEL_HOLE3_DEPTH + F_3_0MM_DOWEL_HOLE3_TIP / 2))):  # 118° drill point
                Cone(0, F_3_0MM_DOWEL_HOLE3_D / 2, F_3_0MM_DOWEL_HOLE3_TIP, mode=Mode.SUBTRACT)

    # Ø3.0mm Dowel Hole4
    with Locations(Plane(origin=(-27.99504273, 0, 48.488836368), x_dir=(-0.8660254037844382, 0, -0.5000000000000009), z_dir=(0.5000000000000009, 0, -0.8660254037844382))):
        with Locations((63.799676389, 2.7)):
            Hole(F_3_0MM_DOWEL_HOLE4_D / 2, depth=F_3_0MM_DOWEL_HOLE4_DEPTH)
            with Locations((0, 0, -(F_3_0MM_DOWEL_HOLE4_DEPTH + F_3_0MM_DOWEL_HOLE4_TIP / 2))):  # 118° drill point
                Cone(0, F_3_0MM_DOWEL_HOLE4_D / 2, F_3_0MM_DOWEL_HOLE4_TIP, mode=Mode.SUBTRACT)

    # Ø3.0mm Dowel Hole5
    with Locations(Plane(origin=(-33.831389353, 0, -58.597685249), x_dir=(-0.8660254037844384, 0, 0.5000000000000004), z_dir=(-0.5000000000000004, 0, -0.8660254037844384))):
        with Locations((150.373366846, 2.7)):
            Hole(F_3_0MM_DOWEL_HOLE5_D / 2, depth=F_3_0MM_DOWEL_HOLE5_DEPTH)
            with Locations((0, 0, -(F_3_0MM_DOWEL_HOLE5_DEPTH + F_3_0MM_DOWEL_HOLE5_TIP / 2))):  # 118° drill point
                Cone(0, F_3_0MM_DOWEL_HOLE5_D / 2, F_3_0MM_DOWEL_HOLE5_TIP, mode=Mode.SUBTRACT)

    # Ø3.0mm Dowel Hole6
    with Locations(Plane.ZY.offset(177.566961858)):
        with Locations((39.986262339, 2.7)):
            Hole(F_3_0MM_DOWEL_HOLE6_D / 2, depth=F_3_0MM_DOWEL_HOLE6_DEPTH)
            with Locations((0, 0, -(F_3_0MM_DOWEL_HOLE6_DEPTH + F_3_0MM_DOWEL_HOLE6_TIP / 2))):  # 118° drill point
                Cone(0, F_3_0MM_DOWEL_HOLE6_D / 2, F_3_0MM_DOWEL_HOLE6_TIP, mode=Mode.SUBTRACT)

    # Sketch23 → Cut-Extrude1 (cut, through all)
    with BuildSketch(Plane(origin=(0, 5.4, 0), x_dir=(1, 0, 0), z_dir=(0, 1, 0))):
        with Locations(Location((-123.652864165, -55.515405045, 0), (0, 0, 270))):
            Circle(SKETCH23_R)
    extrude(amount=-CUT_EXTRUDE1_DEPTH, mode=Mode.SUBTRACT)

    # Sketch24 → Cut-Extrude2 (cut, two sides: drawn at the far end of the back side and taken through both)
    with BuildSketch(Plane(origin=(0, 5.4, 0), x_dir=(1, 0, 0), z_dir=(0, 1, 0)).offset(-CUT_EXTRUDE2_DEPTH_BACK)):
        with Locations(Location((-98.557375053, -41.02651765, 0), (0, 0, 270))):
            Circle(SKETCH24_R)
        with Locations(Location((-148.748353277, -41.02651765, 0), (0, 0, 270))):
            Circle(SKETCH24_R)
        with Locations(Location((-123.652864165, -84.493179833, 0), (0, 0, 270))):
            Circle(SKETCH24_R)
    extrude(amount=CUT_EXTRUDE2_DEPTH + CUT_EXTRUDE2_DEPTH_BACK, mode=Mode.SUBTRACT)


solid = part.part
